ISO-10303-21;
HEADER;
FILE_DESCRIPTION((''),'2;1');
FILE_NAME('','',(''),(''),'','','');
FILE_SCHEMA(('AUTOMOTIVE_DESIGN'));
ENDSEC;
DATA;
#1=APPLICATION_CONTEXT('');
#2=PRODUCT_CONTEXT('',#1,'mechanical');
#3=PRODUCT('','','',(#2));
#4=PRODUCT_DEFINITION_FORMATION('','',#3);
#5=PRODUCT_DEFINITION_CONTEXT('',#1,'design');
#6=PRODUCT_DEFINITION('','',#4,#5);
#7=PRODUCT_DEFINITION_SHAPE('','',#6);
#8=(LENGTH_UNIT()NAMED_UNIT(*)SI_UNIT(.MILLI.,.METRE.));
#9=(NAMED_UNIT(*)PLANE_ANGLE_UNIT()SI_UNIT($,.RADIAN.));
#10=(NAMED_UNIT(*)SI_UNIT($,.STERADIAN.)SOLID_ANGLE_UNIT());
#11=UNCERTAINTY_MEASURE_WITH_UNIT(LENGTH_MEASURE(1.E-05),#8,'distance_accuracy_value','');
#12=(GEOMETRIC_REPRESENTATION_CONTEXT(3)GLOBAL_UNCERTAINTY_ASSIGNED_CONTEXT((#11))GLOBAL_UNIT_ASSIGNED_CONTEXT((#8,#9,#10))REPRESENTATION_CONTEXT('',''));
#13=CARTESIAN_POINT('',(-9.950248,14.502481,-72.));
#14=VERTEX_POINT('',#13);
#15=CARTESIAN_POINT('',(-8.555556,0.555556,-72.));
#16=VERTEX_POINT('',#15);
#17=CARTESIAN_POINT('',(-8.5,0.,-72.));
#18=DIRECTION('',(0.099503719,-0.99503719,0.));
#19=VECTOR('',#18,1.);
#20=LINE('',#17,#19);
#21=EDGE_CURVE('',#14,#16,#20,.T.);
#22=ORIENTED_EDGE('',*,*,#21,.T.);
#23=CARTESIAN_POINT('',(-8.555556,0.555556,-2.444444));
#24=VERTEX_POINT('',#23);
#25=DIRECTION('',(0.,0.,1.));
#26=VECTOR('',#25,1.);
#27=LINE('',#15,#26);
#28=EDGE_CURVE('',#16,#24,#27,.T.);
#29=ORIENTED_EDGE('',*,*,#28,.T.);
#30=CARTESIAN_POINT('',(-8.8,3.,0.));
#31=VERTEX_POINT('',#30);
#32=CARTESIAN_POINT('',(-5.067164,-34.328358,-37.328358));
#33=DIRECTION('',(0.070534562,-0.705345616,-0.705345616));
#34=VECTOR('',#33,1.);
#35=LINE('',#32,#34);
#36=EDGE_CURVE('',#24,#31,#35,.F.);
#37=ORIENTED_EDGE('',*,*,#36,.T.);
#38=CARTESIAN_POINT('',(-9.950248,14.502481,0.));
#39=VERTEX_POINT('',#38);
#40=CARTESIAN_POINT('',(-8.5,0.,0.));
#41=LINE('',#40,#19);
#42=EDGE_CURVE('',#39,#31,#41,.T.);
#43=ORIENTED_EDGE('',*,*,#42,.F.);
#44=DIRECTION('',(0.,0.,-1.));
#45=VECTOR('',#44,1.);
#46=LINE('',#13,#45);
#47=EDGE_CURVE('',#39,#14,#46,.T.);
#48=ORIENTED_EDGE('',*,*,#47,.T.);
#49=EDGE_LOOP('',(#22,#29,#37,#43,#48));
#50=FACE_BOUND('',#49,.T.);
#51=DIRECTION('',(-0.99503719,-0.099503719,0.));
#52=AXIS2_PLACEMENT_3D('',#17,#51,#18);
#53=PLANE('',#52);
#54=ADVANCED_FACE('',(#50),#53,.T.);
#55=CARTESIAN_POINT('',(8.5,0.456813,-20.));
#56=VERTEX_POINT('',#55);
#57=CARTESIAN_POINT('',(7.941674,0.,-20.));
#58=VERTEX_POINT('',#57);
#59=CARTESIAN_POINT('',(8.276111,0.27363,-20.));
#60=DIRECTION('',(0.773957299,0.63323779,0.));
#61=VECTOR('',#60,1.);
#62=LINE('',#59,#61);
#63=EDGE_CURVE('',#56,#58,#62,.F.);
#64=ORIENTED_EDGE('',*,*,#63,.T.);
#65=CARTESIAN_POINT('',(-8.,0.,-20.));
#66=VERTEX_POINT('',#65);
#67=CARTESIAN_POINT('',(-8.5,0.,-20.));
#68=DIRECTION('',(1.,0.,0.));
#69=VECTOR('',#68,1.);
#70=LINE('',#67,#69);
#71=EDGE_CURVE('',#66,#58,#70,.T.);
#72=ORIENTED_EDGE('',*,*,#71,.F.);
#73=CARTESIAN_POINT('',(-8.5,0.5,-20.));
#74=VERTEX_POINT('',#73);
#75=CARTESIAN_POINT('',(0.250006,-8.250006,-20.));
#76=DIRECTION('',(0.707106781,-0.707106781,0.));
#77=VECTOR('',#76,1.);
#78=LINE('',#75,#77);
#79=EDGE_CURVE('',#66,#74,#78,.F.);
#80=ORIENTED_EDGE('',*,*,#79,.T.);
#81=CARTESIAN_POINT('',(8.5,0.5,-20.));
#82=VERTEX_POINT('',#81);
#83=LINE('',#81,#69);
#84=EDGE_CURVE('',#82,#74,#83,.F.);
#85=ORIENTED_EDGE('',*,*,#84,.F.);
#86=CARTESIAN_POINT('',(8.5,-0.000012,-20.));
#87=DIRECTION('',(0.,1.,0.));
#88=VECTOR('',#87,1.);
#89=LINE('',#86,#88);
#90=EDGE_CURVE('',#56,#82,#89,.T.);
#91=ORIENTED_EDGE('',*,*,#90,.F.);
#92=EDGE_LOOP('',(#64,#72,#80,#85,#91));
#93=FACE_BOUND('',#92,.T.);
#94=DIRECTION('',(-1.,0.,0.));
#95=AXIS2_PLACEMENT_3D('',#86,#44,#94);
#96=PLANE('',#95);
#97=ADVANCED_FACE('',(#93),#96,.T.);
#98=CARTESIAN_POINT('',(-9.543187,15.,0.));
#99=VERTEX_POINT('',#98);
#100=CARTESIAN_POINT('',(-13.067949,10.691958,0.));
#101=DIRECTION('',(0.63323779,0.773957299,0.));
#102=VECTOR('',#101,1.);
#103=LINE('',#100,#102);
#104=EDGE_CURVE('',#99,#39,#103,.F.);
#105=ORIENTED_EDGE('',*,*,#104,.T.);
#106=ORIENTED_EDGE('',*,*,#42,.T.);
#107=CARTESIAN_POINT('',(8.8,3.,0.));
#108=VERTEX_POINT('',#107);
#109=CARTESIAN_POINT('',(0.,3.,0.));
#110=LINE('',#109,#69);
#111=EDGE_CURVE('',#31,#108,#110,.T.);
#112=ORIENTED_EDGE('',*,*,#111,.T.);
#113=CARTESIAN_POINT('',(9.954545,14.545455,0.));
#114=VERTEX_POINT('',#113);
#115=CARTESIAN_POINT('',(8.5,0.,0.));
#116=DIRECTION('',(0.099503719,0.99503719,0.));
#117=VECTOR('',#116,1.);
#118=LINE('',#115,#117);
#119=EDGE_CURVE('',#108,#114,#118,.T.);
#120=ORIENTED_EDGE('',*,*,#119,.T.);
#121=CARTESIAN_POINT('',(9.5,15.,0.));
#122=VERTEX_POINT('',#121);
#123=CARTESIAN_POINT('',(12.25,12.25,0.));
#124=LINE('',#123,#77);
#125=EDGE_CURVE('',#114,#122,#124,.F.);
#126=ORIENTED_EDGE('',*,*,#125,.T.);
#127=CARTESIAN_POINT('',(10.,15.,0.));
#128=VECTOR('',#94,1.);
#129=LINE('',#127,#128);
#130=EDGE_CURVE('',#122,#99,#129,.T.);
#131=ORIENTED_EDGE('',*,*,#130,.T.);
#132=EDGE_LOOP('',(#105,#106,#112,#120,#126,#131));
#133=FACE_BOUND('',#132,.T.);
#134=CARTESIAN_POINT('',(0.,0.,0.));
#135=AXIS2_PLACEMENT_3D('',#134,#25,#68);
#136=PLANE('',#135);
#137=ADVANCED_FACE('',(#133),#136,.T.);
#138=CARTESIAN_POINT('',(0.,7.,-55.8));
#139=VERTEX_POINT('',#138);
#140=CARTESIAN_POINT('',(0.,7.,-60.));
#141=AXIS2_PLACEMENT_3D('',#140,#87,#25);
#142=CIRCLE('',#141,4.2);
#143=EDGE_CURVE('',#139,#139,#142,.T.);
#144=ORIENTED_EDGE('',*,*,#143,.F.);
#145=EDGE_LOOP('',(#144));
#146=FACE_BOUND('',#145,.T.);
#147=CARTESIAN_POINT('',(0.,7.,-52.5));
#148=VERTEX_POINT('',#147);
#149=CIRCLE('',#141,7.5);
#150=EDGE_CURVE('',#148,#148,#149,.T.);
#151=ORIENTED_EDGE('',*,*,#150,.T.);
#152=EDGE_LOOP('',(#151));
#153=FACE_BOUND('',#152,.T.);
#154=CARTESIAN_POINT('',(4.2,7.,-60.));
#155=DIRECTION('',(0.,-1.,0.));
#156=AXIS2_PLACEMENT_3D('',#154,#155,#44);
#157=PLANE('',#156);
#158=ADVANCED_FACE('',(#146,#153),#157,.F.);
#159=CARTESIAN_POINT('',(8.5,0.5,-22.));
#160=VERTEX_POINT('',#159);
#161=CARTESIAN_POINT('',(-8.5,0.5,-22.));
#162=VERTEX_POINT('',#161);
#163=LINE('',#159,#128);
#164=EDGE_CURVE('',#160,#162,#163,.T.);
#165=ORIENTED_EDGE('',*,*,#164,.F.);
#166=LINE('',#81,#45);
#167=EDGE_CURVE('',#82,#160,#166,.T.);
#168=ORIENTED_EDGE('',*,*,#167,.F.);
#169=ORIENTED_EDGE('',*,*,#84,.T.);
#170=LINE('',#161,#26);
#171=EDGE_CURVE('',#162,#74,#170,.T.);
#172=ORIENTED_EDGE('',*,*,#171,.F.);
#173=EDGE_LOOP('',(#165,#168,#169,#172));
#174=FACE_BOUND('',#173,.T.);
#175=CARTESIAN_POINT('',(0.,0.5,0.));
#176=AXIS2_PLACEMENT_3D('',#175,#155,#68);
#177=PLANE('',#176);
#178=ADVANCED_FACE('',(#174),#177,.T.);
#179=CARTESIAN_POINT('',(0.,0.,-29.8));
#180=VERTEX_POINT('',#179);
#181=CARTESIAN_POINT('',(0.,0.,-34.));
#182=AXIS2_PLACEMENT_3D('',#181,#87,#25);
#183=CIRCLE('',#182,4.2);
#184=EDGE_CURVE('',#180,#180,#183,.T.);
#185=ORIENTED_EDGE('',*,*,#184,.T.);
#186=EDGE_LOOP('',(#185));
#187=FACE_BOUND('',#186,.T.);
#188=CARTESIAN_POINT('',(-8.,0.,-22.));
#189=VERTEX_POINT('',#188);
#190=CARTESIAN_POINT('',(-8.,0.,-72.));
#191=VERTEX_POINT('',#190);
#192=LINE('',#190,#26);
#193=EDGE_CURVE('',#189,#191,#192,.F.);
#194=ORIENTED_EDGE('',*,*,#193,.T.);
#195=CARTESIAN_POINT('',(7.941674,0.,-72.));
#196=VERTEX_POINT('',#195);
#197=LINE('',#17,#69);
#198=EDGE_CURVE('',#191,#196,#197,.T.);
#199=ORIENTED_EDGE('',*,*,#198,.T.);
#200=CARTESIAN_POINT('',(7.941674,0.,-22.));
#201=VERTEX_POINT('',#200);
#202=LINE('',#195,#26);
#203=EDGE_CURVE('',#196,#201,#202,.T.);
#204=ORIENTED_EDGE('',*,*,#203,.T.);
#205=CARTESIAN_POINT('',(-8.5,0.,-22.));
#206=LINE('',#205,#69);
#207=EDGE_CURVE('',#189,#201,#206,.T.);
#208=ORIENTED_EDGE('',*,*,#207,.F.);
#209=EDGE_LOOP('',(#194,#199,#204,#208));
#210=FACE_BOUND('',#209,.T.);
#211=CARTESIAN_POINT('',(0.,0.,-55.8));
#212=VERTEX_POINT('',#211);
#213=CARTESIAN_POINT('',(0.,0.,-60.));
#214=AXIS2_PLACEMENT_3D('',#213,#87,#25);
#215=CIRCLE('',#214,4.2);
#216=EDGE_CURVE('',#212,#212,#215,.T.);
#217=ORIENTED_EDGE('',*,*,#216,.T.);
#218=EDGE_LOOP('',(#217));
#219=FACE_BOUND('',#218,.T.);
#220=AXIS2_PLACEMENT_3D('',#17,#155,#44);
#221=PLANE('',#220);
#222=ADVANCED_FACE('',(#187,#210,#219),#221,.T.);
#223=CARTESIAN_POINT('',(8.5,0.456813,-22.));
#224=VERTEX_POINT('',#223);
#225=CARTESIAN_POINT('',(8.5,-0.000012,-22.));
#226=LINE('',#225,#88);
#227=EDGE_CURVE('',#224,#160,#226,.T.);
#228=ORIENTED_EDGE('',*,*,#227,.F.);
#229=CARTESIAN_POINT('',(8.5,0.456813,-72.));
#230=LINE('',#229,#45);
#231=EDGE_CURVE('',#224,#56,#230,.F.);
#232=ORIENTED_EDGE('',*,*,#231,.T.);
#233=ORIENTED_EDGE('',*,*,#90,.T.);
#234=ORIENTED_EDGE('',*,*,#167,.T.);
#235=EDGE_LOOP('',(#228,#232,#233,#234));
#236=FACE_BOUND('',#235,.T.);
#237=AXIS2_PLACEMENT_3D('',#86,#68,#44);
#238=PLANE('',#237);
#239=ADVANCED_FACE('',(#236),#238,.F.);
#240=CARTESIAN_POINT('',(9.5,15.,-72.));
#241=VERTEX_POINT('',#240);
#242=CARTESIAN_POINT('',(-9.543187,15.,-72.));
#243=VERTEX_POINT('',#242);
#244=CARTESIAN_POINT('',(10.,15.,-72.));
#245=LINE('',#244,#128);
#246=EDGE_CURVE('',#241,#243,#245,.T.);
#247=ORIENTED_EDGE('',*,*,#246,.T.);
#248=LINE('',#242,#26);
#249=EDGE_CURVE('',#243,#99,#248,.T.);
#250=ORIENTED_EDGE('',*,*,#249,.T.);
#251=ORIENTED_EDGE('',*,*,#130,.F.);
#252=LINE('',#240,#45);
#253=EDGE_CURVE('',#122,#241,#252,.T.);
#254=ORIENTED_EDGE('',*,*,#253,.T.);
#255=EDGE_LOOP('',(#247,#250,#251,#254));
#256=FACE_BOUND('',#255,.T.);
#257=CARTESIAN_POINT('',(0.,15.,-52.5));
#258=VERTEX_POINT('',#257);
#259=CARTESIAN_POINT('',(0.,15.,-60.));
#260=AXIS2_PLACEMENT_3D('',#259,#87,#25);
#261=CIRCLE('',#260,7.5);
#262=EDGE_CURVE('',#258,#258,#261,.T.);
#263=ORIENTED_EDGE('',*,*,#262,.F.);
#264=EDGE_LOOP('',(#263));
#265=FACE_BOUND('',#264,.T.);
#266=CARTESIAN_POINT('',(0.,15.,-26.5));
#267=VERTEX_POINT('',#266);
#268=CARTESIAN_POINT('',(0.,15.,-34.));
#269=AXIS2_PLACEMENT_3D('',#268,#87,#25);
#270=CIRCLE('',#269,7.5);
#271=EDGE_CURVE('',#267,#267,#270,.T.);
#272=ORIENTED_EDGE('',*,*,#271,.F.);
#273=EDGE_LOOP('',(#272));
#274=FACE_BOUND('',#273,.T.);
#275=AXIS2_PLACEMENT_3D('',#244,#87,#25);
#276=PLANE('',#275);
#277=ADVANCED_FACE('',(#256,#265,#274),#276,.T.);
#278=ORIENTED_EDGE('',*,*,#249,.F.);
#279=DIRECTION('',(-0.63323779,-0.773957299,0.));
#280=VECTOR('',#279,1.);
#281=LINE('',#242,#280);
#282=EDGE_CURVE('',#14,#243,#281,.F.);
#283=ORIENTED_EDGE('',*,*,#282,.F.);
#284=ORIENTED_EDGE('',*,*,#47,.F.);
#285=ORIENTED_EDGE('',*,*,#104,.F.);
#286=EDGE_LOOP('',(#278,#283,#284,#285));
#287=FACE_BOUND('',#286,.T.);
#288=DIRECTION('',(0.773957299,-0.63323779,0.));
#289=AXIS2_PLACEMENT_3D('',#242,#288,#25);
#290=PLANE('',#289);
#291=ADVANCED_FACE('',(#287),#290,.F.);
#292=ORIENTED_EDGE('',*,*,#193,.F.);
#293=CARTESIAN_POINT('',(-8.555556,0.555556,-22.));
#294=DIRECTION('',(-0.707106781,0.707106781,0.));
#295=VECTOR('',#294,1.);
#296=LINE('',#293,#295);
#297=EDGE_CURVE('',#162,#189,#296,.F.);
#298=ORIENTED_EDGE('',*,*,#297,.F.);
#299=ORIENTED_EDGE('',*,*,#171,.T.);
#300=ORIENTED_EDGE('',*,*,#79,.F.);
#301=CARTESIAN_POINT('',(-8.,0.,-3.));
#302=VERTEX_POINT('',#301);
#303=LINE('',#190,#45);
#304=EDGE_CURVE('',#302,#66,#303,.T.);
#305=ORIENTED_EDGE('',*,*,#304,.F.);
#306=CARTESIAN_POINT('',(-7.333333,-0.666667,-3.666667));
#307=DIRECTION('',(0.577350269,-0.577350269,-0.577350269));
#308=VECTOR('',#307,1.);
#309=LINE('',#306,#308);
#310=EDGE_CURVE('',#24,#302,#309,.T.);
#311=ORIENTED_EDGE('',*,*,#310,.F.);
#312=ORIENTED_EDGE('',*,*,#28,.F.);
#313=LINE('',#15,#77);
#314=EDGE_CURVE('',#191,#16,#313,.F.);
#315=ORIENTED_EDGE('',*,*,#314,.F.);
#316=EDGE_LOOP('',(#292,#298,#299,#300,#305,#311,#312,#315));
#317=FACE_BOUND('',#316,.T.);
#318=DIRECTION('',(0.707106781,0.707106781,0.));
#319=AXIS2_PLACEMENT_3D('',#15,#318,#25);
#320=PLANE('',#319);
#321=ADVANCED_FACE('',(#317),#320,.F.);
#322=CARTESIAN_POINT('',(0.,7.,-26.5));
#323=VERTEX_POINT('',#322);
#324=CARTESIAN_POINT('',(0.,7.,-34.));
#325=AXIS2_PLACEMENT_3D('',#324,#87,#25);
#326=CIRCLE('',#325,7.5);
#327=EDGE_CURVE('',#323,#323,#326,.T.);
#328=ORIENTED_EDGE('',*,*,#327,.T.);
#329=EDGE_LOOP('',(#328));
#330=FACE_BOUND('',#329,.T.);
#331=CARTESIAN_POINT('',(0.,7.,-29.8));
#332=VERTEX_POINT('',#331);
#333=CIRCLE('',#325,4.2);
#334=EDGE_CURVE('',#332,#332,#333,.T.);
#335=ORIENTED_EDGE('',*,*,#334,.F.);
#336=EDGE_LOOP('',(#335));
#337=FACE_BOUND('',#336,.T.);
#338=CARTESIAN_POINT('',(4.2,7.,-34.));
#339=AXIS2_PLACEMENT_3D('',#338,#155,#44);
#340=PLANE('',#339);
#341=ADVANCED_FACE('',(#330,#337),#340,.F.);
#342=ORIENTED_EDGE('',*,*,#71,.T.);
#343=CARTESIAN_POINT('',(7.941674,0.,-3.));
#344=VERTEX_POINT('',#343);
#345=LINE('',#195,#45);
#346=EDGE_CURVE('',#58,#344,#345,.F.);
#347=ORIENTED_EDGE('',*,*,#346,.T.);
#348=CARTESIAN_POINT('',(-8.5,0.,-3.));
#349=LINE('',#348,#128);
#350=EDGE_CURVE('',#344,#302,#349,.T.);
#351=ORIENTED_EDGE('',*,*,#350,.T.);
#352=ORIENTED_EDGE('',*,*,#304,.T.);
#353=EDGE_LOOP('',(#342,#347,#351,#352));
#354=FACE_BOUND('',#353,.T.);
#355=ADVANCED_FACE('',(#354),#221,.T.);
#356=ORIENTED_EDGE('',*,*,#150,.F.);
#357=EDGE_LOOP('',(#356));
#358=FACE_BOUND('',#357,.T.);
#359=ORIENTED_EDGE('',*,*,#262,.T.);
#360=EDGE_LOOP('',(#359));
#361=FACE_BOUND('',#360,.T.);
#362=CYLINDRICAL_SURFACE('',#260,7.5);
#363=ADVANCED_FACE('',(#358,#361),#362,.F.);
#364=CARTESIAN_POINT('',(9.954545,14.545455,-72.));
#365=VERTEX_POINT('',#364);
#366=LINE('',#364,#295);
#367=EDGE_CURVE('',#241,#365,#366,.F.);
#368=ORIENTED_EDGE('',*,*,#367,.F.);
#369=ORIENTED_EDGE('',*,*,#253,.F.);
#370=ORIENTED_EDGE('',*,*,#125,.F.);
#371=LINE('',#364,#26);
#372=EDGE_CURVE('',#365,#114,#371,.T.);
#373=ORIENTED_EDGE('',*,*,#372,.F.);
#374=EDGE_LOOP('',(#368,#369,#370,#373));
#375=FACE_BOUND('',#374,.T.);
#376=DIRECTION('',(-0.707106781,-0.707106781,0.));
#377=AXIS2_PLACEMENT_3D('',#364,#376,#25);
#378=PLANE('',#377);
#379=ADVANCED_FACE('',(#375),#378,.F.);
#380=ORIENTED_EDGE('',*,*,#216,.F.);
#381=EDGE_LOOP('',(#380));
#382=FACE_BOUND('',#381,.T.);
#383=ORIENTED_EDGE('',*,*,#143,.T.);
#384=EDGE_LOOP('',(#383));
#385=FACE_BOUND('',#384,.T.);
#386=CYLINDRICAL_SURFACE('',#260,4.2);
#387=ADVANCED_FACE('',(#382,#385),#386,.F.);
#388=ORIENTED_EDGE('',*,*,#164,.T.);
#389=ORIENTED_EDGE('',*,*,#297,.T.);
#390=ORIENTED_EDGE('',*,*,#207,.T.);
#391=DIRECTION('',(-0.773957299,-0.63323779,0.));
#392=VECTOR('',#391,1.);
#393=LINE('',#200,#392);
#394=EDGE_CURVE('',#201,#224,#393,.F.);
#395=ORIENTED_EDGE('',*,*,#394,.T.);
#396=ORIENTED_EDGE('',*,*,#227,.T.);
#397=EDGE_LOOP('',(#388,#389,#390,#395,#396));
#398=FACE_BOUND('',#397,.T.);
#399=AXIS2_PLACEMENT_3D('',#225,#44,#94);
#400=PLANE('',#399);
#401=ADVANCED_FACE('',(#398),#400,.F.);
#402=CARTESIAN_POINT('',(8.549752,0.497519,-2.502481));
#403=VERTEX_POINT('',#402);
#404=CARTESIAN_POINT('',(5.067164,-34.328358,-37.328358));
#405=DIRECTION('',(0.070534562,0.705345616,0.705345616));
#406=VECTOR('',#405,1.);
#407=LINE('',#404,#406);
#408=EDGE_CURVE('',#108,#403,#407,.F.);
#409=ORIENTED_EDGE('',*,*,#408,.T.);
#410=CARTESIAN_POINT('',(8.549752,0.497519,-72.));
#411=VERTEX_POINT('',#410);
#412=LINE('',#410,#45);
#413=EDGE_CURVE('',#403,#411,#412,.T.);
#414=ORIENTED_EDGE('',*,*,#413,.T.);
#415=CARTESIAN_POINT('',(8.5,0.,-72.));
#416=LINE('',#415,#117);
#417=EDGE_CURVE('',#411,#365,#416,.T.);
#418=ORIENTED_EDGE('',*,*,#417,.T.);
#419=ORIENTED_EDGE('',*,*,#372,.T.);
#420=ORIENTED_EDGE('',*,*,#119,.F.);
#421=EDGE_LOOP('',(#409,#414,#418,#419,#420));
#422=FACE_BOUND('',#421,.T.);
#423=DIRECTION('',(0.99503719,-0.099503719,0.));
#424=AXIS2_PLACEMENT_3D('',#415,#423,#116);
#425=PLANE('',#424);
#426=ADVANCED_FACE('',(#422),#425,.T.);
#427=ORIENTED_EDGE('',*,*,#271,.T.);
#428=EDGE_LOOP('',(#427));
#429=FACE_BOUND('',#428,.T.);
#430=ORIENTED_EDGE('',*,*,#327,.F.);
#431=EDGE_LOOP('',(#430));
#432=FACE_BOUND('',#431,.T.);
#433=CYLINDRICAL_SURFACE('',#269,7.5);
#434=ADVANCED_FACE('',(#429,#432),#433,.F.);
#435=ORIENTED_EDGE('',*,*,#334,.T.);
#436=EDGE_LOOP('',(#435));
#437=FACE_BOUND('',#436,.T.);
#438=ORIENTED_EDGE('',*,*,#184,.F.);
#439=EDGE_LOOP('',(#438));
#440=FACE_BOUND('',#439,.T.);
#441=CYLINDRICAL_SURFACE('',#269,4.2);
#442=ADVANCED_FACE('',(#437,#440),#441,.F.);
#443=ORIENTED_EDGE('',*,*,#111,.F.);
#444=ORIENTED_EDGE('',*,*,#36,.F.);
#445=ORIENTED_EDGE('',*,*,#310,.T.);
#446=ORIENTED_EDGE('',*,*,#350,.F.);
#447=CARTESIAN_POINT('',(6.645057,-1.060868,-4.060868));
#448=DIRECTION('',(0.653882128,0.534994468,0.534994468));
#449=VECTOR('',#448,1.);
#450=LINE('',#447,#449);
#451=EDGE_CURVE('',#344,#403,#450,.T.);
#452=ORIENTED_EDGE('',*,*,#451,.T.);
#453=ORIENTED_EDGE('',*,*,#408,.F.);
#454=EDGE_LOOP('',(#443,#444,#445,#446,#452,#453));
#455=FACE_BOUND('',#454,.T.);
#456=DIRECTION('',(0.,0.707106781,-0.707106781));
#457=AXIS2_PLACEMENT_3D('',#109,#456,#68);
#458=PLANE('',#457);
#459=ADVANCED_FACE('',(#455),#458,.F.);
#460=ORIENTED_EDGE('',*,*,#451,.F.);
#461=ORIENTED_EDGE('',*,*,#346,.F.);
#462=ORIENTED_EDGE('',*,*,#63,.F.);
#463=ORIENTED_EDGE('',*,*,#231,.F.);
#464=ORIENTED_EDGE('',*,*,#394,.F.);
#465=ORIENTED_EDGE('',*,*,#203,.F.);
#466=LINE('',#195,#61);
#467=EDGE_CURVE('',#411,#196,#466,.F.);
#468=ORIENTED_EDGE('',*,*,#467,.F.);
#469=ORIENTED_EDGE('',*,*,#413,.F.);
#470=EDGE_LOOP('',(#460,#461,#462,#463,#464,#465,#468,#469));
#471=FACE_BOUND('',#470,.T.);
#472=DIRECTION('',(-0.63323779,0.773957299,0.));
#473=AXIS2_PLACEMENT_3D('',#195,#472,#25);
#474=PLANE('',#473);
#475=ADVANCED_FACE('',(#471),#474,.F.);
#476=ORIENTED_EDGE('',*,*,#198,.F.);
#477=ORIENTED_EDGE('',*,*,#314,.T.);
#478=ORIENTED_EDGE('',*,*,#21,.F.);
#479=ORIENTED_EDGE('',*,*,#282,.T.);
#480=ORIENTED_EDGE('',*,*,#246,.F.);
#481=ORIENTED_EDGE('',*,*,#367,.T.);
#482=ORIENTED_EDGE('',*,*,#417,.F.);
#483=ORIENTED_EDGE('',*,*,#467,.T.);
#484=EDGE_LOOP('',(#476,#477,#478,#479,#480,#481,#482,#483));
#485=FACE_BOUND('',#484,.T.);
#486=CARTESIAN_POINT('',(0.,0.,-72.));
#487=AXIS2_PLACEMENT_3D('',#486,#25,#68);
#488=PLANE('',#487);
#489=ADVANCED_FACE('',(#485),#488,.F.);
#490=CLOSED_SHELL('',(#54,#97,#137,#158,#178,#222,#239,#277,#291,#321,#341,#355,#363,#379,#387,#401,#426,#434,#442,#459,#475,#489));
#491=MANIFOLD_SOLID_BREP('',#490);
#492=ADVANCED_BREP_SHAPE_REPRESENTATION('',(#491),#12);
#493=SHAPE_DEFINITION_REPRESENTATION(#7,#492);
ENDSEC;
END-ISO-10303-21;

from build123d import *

# Parameters (mm, degrees)
EXTRUDE_1_DEPTH           = 72
CHAMFER_1_SIZE            = 3
CUT_EXTRUDE_1_DEPTH       = 75.222638056
CUT_EXTRUDE_1_DEPTH_BACK  = 0.5
SKETCH_2_W                = 17
SKETCH_2_H                = 2
HOLE_WIZARD_1_D           = 8.4
HOLE_WIZARD_1_CBORE_D     = 15
HOLE_WIZARD_1_CBORE_DEPTH = 8
CHAMFER_2_SIZE            = 0.5
CHAMFER_2_SIZE_2          = 0.558326423
CHAMFER_2_SIZE_3          = 0.456812528


with BuildPart() as part:
    # 草图1 → 凸台-拉伸1 (new body)
    with BuildSketch(Plane.XY):
        Polygon((-8.5, 0), (8.5, 0), (10, 15), (-10, 15), align=None)
    extrude(amount=-EXTRUDE_1_DEPTH)

    # 倒角1
    chamfer_1_edges = [part.edges().sort_by_distance(p)[0] for p in [
        (0, 0, 0),
    ]]
    chamfer(chamfer_1_edges, length=CHAMFER_1_SIZE)

    # 草图2 → 切除-拉伸-薄壁1 (cut, two sides: drawn at the far end of the back side and taken through both)
    with BuildSketch(Plane.XZ.offset(-CUT_EXTRUDE_1_DEPTH_BACK)):
        with Locations((0, -21)):
            Rectangle(SKETCH_2_W, SKETCH_2_H)
    extrude(amount=CUT_EXTRUDE_1_DEPTH + CUT_EXTRUDE_1_DEPTH_BACK, mode=Mode.SUBTRACT)

    # 孔1 (through all)
    with Locations(Plane(origin=(0, 15, 0), x_dir=(1, 0, 0), z_dir=(0, 1, 0))):
        with Locations((0, 34), (0, 60)):
            CounterBoreHole(HOLE_WIZARD_1_D / 2, HOLE_WIZARD_1_CBORE_D / 2, HOLE_WIZARD_1_CBORE_DEPTH)

    # 倒角2
    # the kernel refuses this chamfer: 0.558326423, 0.5, 0.456812528 mm, written as the material it takes off along each edge
    with BuildSketch(Plane(origin=(-8.5, 0, -1.560537605), x_dir=(0.9995316374096256, -0.030602382541768988, 0), z_dir=(0, 0, -1))) as chamfer_2_piece_1:
        Polygon((CHAMFER_2_SIZE * 0.99953163741, -CHAMFER_2_SIZE * 0.0306023825418), (-CHAMFER_2_SIZE_2 * 0.129907624032, -CHAMFER_2_SIZE_2 * 0.991526101843), (0, 0), align=None)
    extrude(amount=19.87892479, mode=Mode.SUBTRACT)
    with BuildSketch(Plane(origin=(8.5, 0, -1.560537605), x_dir=(-0.9996983211362673, -0.024561488499858487, 0), z_dir=(0, 0, -1))) as chamfer_2_piece_2:
        Polygon((CHAMFER_2_SIZE_2 * 0.999698321845, CHAMFER_2_SIZE_2 * 0.0245614885173), (-CHAMFER_2_SIZE * 0.123913295356, CHAMFER_2_SIZE * 0.992293049071), (0, 0), align=None)
    extrude(amount=19.87892479, mode=Mode.SUBTRACT)
    with BuildSketch(Plane(origin=(8.5, 0, -20.560537605), x_dir=(0.12990762393949729, 0.9915261011402545, 0), z_dir=(0, 0, -1))) as chamfer_2_piece_3:
        Polygon((CHAMFER_2_SIZE * 0.99953163741, -CHAMFER_2_SIZE * 0.0306023825418), (-CHAMFER_2_SIZE_2 * 0.129907624032, -CHAMFER_2_SIZE_2 * 0.991526101843), (0, 0), align=None)
    extrude(amount=52.87892479, mode=Mode.SUBTRACT)
    with BuildSketch(Plane(origin=(-8.5, 0, -20.560537605), x_dir=(-0.1239132953563816, 0.9922930490706474, 0), z_dir=(0, 0, -1))) as chamfer_2_piece_4:
        Polygon((CHAMFER_2_SIZE_2 * 0.999698321845, CHAMFER_2_SIZE_2 * 0.0245614885173), (-CHAMFER_2_SIZE * 0.123913295356, CHAMFER_2_SIZE * 0.992293049071), (0, 0), align=None)
    extrude(amount=52.87892479, mode=Mode.SUBTRACT)
    # the kernel refuses this chamfer: 0.558326423, 0.5, 0.456812528 mm, written as the material it takes off along each edge
    with BuildSketch(Plane(origin=(-10, 15, 1.285841494), x_dir=(0.07210667854261384, -0.9973969254562359, 0), z_dir=(0, 0, -1)), Plane(origin=(10, 15, 1.285841494), x_dir=(-0.9996219169112968, 0.027495876610585647, 0), z_dir=(0, 0, -1))) as chamfer_2_2_piece_1:
        Polygon((CHAMFER_2_SIZE * 0.999621916911, -CHAMFER_2_SIZE * 0.0274958766106), (CHAMFER_2_SIZE_3 * 0.0721066785794, -CHAMFER_2_SIZE_3 * 0.997396925964), (0, 0), align=None)
    extrude(amount=74.571682988, mode=Mode.SUBTRACT)


solid = part.part
